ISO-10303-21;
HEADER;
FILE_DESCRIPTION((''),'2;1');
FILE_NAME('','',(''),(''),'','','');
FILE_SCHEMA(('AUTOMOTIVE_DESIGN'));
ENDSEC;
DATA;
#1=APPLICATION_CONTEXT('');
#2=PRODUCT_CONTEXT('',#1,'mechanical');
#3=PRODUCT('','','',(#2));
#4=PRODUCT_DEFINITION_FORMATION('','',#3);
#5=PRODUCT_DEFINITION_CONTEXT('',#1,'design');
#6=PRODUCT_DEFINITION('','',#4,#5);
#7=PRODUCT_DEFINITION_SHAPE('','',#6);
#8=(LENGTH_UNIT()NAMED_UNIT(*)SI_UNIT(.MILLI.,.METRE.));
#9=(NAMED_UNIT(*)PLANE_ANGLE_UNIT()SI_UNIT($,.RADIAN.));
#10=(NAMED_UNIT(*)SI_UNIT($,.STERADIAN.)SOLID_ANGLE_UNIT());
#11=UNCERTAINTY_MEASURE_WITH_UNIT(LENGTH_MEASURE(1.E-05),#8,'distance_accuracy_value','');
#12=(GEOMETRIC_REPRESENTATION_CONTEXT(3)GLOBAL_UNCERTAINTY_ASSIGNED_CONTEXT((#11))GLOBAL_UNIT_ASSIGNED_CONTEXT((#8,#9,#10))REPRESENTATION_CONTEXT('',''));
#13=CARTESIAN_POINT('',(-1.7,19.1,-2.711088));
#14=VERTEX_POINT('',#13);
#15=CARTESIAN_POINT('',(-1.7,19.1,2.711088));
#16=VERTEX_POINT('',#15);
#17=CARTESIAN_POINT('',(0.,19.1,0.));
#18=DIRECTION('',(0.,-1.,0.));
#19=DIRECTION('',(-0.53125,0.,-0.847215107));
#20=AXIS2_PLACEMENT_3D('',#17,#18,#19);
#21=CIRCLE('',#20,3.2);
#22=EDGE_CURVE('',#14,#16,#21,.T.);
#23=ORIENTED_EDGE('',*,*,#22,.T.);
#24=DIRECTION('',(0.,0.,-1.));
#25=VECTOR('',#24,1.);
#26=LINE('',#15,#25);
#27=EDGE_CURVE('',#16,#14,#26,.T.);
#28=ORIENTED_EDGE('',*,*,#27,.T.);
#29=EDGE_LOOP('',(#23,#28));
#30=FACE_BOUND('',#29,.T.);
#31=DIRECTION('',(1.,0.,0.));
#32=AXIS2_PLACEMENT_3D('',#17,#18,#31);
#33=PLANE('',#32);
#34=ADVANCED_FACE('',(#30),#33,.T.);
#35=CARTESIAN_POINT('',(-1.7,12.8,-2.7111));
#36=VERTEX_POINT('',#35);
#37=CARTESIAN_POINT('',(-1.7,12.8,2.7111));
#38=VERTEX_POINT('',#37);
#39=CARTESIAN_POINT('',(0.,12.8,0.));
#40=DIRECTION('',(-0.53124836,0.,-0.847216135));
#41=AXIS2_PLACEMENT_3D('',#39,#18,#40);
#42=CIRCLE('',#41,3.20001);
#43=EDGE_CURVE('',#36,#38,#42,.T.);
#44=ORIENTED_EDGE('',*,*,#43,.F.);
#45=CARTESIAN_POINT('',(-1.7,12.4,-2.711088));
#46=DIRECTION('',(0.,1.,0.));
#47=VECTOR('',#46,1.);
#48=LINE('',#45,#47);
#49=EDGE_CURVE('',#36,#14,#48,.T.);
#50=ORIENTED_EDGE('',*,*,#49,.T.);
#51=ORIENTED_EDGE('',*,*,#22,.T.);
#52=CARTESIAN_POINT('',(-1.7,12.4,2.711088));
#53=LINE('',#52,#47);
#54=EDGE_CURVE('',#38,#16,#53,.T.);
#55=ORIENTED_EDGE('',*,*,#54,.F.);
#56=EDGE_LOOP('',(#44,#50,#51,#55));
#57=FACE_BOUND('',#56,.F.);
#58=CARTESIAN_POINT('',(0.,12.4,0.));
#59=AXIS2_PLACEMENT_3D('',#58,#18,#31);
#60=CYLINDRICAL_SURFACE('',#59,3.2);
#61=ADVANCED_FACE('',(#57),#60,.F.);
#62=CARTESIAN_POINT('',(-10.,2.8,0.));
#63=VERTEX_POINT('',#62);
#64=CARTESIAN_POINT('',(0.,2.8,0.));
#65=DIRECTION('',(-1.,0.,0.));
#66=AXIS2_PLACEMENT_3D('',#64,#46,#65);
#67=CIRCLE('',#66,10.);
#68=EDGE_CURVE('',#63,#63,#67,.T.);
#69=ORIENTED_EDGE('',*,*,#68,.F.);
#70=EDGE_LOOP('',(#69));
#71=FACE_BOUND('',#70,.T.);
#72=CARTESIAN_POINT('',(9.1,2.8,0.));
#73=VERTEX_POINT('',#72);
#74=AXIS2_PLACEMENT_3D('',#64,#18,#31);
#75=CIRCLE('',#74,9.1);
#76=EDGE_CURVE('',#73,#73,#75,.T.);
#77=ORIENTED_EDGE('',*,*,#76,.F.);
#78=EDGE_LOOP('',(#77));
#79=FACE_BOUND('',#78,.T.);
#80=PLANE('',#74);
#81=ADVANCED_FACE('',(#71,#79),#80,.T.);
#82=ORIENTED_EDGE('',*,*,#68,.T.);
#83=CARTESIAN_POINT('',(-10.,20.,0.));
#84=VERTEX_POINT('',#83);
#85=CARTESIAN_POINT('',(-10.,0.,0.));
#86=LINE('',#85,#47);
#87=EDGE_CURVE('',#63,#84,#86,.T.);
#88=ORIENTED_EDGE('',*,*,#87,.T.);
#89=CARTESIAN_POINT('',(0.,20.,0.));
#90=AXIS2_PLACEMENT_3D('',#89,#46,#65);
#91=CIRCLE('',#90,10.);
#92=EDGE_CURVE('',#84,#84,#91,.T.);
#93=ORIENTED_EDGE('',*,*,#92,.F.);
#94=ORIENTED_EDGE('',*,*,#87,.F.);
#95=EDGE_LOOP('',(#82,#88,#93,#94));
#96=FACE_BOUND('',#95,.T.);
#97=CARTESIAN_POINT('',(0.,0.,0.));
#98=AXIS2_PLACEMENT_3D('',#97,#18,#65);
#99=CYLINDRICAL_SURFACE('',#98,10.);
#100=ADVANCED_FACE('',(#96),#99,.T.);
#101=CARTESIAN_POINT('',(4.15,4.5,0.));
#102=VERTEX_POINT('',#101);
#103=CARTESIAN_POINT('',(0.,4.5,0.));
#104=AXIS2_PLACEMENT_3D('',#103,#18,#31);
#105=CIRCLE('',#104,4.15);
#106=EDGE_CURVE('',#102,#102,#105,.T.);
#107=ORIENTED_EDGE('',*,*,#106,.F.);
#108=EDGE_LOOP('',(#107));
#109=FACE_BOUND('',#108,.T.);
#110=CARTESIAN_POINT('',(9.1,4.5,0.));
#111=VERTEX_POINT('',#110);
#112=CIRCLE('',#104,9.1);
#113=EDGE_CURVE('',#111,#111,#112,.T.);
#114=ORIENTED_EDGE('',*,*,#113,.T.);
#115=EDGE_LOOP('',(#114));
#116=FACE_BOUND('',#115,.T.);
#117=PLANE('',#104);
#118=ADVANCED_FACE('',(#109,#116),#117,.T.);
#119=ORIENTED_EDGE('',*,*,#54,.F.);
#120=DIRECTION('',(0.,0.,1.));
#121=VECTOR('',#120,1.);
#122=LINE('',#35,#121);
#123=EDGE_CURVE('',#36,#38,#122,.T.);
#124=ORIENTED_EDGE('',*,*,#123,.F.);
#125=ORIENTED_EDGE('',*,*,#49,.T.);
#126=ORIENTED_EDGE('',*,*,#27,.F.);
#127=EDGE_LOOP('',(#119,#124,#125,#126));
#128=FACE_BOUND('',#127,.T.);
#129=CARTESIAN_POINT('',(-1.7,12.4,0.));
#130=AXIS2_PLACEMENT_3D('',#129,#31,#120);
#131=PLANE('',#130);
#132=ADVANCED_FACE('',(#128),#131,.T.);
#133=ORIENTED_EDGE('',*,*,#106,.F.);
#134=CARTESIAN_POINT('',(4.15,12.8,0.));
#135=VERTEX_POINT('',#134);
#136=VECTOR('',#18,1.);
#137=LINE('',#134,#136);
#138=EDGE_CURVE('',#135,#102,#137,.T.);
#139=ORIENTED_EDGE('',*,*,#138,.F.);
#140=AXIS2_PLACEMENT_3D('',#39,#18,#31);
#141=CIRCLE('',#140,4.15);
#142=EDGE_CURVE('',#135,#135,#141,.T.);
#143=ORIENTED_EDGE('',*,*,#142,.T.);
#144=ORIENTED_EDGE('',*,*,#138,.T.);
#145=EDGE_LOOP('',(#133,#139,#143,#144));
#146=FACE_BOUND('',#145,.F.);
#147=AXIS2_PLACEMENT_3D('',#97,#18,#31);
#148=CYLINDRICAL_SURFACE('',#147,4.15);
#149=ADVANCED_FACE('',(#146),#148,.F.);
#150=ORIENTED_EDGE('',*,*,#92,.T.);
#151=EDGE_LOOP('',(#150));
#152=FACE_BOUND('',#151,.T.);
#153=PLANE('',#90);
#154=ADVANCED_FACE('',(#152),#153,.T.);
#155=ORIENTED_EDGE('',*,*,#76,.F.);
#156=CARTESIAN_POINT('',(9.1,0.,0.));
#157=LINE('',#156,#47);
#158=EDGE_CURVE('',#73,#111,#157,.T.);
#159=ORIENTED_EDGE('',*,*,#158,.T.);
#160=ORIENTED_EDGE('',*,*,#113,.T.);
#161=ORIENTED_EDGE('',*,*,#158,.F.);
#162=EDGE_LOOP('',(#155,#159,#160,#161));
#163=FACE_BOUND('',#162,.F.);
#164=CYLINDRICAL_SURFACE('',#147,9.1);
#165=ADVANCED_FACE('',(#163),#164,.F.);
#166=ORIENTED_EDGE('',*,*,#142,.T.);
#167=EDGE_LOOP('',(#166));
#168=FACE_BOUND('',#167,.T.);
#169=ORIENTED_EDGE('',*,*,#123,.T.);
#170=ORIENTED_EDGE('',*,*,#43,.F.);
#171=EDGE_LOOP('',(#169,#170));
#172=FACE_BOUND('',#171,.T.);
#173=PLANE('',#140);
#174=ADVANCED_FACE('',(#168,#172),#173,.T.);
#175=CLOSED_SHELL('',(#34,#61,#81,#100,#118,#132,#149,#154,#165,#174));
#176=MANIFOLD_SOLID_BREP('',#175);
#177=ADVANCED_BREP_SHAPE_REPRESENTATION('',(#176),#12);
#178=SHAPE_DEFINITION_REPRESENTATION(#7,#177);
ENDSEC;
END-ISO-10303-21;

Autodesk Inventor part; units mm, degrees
ref_plane "YZ Plane" through (0, 0, 0) normal (1, 0, 0) x (0, 1, 0)
ref_plane "XZ Plane" through (0, 0, 0) normal (0, 1, 0) x (-1, 0, 0)
ref_plane "XY Plane" through (0, 0, 0) normal (0, 0, 1) x (1, 0, 0)
sketch "Sketch2" plane through (0, 0, 0) normal (0, 1, 0) x (-1, 0, 0)
  circle A0 centre (0, 0) radius 10
  dimension "d0" = 20
extrude "Extrusion1" add sketch "Sketch2" along normal blind 20
sketch "Sketch3" plane through (0, 0, 0) normal (0, -1, 0) x (1, 0, 0)
  circle A0 centre (0, 0) radius 4.15
  dimension "d3" = 8.3
extrude "Extrusion2" cut sketch "Sketch3" against normal blind 12.4
sketch "Sketch4" plane through (0, 12.4, 0) normal (0, -1, 0) x (1, 0, 0)
  circle A0 centre (0, 0) radius 4.15 projected
  circle A1 centre (0, 0) radius 3.2
  line L0 (3.2, 0) -> (-1.7, 0)
  line L1 (-1.7, 0) -> (-1.7, -3.7858)
  line L2 (-1.7, 0) -> (-1.7, 3.7858)
  point P0 (-1.7, 2.7111)
  point P1 (-1.7, -2.7111)
  dimension "d16" = 6.4
  dimension "d17" = 4.9
extrude "Extrusion3" cut sketch "Sketch4" against normal blind 6.7 contours A1 L0 L2 | L1 L0 A1
sketch "Sketch8" plane through (0, 0, 0) normal (0, -1, 0) x (1, 0, 0)
  circle A0 centre (0, 0) radius 9.1
  dimension "d18" = 18.2
extrude "Extrusion7" cut sketch "Sketch8" against normal blind 4.5
sketch "Sketch9" plane through (0, 0, 0) normal (0, -1, 0) x (1, 0, 0)
  circle A0 centre (0, 0) radius 10 projected
extrude "Extrusion8" cut sketch "Sketch9" against normal blind 2.8
sketch "Sketch10" plane through (0, 12.4, 0) normal (0, -1, 0) x (1, 0, 0)
  arc A0 (-1.7, -2.7111) -> (-1.7, 2.7111) centre (0, 0) ccw projected
  line L0 (-1.7, -2.7111) -> (-1.7, 2.7111) projected
  circle A1 centre (0, 0) radius 4.15 projected
extrude "Extrusion9" cut sketch "Sketch10" against normal blind 0.4
properties part number "RotaryEncoderKnob"
